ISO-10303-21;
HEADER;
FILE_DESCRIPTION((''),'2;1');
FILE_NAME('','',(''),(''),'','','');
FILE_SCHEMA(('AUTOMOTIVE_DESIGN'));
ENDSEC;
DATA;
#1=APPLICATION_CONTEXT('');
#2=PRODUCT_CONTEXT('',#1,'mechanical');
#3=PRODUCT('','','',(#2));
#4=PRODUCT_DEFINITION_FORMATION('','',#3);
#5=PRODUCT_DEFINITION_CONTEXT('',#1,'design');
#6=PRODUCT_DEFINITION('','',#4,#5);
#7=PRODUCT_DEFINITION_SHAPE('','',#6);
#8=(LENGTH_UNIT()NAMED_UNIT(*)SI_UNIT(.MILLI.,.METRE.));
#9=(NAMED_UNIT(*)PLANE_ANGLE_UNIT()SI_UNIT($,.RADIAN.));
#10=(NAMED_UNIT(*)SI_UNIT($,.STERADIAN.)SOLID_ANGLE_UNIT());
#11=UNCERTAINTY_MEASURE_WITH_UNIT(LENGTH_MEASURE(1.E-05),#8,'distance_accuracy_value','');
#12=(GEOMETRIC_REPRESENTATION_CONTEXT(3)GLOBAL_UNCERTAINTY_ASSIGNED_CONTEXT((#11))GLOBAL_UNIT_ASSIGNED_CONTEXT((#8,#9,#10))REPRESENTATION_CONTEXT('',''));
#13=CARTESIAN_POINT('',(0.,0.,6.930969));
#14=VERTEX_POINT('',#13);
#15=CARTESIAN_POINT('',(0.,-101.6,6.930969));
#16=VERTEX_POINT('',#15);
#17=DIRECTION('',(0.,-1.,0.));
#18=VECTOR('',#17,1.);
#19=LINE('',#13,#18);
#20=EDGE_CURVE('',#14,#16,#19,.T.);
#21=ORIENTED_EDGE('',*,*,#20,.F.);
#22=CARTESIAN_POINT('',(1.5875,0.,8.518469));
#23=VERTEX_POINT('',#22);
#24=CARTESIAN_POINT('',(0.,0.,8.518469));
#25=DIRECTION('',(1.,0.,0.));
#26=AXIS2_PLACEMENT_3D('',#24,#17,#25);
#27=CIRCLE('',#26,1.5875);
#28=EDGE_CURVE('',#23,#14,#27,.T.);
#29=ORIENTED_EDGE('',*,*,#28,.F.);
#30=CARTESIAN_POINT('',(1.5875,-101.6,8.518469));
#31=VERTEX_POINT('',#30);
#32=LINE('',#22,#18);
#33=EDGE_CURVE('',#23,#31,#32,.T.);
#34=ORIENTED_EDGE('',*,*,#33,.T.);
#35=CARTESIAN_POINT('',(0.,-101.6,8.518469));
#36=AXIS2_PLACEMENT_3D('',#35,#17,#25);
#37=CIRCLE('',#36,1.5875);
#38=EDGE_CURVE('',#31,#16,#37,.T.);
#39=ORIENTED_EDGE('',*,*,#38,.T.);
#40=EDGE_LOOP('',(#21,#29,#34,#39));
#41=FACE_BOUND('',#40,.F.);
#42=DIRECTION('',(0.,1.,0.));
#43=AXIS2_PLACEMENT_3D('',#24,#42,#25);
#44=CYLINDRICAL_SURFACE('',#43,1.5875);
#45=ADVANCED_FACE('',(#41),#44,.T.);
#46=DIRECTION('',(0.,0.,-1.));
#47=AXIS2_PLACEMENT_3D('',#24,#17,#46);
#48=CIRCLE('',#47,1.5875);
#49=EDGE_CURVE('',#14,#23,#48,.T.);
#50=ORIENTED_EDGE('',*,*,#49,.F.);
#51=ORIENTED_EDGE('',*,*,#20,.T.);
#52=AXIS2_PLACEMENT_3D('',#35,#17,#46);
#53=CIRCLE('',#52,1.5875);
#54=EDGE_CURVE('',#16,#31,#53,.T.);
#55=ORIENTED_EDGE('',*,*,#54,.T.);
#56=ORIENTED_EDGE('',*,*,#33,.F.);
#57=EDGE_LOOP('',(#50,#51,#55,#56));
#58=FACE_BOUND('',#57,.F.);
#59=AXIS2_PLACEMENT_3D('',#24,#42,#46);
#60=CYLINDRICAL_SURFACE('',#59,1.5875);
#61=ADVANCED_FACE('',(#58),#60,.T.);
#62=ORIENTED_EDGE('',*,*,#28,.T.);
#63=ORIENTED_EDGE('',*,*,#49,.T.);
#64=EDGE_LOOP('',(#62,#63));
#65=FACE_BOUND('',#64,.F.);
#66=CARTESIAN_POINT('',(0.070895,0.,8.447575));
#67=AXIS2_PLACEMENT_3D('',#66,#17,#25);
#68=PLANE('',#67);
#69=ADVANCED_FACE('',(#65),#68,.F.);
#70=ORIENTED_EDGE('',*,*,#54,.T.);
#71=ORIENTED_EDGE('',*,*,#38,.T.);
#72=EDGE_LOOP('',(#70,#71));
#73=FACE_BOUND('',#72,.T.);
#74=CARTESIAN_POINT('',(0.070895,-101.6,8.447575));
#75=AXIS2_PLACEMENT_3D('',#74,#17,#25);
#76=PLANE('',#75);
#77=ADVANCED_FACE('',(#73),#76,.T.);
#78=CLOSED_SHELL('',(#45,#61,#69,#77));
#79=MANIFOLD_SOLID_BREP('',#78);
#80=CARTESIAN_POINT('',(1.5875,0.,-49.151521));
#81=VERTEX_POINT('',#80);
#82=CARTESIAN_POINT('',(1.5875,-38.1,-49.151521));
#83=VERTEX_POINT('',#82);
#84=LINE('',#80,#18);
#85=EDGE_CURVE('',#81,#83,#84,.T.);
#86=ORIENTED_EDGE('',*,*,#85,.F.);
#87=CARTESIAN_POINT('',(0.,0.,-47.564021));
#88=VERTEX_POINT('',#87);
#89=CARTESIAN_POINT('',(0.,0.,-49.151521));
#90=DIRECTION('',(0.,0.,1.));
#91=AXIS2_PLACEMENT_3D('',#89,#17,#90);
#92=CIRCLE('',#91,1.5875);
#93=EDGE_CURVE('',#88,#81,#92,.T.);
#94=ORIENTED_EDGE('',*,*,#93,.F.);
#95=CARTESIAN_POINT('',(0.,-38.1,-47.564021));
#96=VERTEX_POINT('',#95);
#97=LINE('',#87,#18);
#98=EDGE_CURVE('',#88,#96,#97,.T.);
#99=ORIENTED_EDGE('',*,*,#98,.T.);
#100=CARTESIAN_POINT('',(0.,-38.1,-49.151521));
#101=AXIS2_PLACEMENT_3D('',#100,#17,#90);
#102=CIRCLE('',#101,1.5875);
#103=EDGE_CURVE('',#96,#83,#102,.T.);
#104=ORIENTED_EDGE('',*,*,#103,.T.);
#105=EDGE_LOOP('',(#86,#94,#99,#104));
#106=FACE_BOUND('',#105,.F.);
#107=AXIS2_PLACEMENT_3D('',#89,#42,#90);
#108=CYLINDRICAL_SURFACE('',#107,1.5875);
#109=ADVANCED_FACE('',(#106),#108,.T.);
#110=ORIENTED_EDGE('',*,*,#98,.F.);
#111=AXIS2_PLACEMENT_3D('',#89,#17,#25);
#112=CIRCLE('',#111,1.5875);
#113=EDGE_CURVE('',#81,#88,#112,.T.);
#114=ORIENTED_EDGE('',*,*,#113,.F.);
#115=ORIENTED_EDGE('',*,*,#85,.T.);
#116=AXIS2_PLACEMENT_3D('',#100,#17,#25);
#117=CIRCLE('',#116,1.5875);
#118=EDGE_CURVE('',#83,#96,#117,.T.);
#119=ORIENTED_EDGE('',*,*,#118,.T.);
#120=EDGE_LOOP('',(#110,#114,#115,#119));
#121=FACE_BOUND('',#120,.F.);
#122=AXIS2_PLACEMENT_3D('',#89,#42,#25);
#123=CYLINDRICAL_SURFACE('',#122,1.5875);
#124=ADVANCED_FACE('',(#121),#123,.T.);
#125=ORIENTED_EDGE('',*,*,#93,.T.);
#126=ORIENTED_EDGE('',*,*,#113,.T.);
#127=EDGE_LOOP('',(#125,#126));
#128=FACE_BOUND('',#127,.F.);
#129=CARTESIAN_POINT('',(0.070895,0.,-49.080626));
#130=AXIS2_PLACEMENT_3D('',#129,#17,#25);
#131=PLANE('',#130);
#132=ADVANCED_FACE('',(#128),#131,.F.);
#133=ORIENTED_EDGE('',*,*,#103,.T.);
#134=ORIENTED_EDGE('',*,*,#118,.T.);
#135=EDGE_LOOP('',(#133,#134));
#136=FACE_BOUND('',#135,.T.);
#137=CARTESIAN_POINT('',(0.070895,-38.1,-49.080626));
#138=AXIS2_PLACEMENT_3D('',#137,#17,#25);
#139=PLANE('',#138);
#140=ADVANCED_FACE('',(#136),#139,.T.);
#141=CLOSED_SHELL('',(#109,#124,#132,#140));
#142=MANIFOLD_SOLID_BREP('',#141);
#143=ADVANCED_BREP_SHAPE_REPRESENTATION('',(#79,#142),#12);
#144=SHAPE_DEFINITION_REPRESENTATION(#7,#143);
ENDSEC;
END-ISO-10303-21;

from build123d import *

# Parameters (mm, degrees)
F1_DEPTH = 101.6
F2_DEPTH = 38.1


# Not quite as in the source:
# - the program builds the solid bodies; features that only make, move or delete a surface that nothing else refers to are left out


with BuildPart() as f1:
    # F0 (on Front) → F1 (new body)
    with BuildSketch(Plane.XZ):
        with BuildLine():
            ThreePointArc((1.5875, 8.5184694223), (-1.1225320151, 9.6410014374), (0, 6.9309694223))
            ThreePointArc((0, 6.9309694223), (1.1225320151, 7.3959374071), (1.5875, 8.5184694223))
        make_face()
    extrude(amount=F1_DEPTH)


with BuildPart() as f2:
    # F0 (on Front) → F2 (new body)
    with BuildSketch(Plane.XZ):
        with BuildLine():
            ThreePointArc((1.5875, -49.1515211761), (1.1225320151, -48.028989161), (0, -47.5640211761))
            ThreePointArc((0, -47.5640211761), (-1.1225320151, -50.2740531912), (1.5875, -49.1515211761))
        make_face()
    extrude(amount=F2_DEPTH)


solid = Compound([f1.part, f2.part])
